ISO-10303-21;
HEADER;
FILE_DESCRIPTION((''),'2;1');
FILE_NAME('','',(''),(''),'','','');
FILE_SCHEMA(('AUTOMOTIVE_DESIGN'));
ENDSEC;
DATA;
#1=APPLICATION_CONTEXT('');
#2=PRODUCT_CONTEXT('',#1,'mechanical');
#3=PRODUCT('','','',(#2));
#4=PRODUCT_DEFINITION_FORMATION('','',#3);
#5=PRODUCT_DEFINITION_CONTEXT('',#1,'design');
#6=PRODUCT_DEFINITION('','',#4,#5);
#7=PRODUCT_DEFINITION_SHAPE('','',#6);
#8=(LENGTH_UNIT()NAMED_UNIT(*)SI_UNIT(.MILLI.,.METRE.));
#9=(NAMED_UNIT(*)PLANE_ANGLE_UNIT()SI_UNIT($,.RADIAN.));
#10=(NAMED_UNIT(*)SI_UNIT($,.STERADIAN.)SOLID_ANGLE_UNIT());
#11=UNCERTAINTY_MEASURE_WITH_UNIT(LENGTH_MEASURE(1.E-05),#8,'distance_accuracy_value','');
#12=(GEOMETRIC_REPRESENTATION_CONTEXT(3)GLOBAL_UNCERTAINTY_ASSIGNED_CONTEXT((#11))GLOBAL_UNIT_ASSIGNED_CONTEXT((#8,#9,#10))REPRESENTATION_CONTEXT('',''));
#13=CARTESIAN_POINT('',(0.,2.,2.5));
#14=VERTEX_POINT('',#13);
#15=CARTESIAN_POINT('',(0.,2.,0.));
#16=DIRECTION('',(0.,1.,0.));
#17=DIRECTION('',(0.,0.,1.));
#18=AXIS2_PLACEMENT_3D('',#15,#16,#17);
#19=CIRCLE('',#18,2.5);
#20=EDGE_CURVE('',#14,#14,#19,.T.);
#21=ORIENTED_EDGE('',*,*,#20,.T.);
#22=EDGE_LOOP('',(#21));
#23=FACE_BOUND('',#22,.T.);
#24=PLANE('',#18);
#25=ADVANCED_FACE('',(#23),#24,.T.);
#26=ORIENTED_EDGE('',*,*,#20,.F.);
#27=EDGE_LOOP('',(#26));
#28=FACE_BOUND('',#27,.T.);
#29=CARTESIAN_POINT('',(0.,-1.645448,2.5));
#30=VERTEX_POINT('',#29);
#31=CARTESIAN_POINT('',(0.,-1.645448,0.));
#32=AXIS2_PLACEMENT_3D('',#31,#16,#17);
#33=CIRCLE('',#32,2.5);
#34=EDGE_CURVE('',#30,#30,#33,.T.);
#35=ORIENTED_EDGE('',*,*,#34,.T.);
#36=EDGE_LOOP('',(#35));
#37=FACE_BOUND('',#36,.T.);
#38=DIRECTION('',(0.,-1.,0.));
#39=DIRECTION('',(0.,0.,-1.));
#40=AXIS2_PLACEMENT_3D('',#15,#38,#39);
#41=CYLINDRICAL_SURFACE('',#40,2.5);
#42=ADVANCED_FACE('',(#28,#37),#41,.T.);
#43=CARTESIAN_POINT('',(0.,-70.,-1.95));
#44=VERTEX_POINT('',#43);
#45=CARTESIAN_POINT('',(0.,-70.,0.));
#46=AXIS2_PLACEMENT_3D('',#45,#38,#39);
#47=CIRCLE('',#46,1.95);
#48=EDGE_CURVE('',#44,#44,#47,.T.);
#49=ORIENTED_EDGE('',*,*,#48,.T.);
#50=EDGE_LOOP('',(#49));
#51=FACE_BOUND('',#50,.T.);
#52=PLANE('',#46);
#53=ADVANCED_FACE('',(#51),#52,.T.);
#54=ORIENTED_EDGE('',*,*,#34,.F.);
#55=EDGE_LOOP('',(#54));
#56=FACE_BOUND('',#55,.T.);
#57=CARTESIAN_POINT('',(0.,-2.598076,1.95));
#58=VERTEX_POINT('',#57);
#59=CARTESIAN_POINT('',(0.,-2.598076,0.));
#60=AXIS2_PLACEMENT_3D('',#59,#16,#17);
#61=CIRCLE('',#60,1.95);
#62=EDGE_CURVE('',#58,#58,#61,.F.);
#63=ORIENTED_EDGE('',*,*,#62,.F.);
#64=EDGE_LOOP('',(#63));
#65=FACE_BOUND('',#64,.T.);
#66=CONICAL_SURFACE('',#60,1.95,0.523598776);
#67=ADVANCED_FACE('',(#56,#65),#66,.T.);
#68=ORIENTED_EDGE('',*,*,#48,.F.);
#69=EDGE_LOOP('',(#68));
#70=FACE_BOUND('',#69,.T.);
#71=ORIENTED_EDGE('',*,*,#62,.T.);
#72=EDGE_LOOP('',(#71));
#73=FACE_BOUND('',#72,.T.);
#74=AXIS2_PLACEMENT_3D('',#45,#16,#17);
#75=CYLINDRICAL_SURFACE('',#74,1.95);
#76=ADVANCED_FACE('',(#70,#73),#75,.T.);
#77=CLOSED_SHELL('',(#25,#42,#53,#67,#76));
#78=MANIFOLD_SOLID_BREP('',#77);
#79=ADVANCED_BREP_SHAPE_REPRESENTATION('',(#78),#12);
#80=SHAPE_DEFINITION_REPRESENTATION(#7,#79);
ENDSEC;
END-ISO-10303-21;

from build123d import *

# Parameters (mm, degrees)
SKETCH_1_R       = 2.5
EXTRUDE_1_DEPTH  = 2
SKETCH_2_R       = 1.95
EXTRUDE_2_DEPTH  = 70
CHAMFER_1_SIZE   = 1.5
CHAMFER_1_SIZE_2 = 2.598076211


with BuildPart() as part:
    # 草图1 → 凸台-拉伸1 (new body)
    with BuildSketch(Plane(origin=(0, 0, 0), x_dir=(1, 0, 0), z_dir=(0, 1, 0))):
        with Locations(Location((0, 0, 0), (0, 0, 270))):
            Circle(SKETCH_1_R)
    extrude(amount=EXTRUDE_1_DEPTH)

    # 草图2 → 凸台-拉伸2 (add)
    with BuildSketch(Plane.XZ):
        with Locations(Location((0, 0, 0), (0, 0, 270))):
            Circle(SKETCH_2_R)
    extrude(amount=EXTRUDE_2_DEPTH)

    # 倒角1
    # the kernel refuses this chamfer: 2.598076211, 1.5 mm, written as the material it adds along each edge
    with BuildSketch(Plane(origin=(0, 0, 0), x_dir=(0, 0, -1), z_dir=(-1, 0, 0))) as chamfer_1_piece_1_section:
        Polygon((1.95 + CHAMFER_1_SIZE, 0), (1.95, CHAMFER_1_SIZE_2), (1.95, 0), align=None)
    chamfer_1_piece_1 = revolve(axis=Axis((0, 0, 0), (0, -1, 0)), mode=Mode.PRIVATE)
    chamfer_1_piece_1 = chamfer_1_piece_1 & Plane(origin=(0, -2.153550613, 0), x_dir=(0, 0, 1), z_dir=(0, -1, 0)) * Cylinder(2.5, 14, mode=Mode.PRIVATE)
    add(chamfer_1_piece_1)


solid = part.part
